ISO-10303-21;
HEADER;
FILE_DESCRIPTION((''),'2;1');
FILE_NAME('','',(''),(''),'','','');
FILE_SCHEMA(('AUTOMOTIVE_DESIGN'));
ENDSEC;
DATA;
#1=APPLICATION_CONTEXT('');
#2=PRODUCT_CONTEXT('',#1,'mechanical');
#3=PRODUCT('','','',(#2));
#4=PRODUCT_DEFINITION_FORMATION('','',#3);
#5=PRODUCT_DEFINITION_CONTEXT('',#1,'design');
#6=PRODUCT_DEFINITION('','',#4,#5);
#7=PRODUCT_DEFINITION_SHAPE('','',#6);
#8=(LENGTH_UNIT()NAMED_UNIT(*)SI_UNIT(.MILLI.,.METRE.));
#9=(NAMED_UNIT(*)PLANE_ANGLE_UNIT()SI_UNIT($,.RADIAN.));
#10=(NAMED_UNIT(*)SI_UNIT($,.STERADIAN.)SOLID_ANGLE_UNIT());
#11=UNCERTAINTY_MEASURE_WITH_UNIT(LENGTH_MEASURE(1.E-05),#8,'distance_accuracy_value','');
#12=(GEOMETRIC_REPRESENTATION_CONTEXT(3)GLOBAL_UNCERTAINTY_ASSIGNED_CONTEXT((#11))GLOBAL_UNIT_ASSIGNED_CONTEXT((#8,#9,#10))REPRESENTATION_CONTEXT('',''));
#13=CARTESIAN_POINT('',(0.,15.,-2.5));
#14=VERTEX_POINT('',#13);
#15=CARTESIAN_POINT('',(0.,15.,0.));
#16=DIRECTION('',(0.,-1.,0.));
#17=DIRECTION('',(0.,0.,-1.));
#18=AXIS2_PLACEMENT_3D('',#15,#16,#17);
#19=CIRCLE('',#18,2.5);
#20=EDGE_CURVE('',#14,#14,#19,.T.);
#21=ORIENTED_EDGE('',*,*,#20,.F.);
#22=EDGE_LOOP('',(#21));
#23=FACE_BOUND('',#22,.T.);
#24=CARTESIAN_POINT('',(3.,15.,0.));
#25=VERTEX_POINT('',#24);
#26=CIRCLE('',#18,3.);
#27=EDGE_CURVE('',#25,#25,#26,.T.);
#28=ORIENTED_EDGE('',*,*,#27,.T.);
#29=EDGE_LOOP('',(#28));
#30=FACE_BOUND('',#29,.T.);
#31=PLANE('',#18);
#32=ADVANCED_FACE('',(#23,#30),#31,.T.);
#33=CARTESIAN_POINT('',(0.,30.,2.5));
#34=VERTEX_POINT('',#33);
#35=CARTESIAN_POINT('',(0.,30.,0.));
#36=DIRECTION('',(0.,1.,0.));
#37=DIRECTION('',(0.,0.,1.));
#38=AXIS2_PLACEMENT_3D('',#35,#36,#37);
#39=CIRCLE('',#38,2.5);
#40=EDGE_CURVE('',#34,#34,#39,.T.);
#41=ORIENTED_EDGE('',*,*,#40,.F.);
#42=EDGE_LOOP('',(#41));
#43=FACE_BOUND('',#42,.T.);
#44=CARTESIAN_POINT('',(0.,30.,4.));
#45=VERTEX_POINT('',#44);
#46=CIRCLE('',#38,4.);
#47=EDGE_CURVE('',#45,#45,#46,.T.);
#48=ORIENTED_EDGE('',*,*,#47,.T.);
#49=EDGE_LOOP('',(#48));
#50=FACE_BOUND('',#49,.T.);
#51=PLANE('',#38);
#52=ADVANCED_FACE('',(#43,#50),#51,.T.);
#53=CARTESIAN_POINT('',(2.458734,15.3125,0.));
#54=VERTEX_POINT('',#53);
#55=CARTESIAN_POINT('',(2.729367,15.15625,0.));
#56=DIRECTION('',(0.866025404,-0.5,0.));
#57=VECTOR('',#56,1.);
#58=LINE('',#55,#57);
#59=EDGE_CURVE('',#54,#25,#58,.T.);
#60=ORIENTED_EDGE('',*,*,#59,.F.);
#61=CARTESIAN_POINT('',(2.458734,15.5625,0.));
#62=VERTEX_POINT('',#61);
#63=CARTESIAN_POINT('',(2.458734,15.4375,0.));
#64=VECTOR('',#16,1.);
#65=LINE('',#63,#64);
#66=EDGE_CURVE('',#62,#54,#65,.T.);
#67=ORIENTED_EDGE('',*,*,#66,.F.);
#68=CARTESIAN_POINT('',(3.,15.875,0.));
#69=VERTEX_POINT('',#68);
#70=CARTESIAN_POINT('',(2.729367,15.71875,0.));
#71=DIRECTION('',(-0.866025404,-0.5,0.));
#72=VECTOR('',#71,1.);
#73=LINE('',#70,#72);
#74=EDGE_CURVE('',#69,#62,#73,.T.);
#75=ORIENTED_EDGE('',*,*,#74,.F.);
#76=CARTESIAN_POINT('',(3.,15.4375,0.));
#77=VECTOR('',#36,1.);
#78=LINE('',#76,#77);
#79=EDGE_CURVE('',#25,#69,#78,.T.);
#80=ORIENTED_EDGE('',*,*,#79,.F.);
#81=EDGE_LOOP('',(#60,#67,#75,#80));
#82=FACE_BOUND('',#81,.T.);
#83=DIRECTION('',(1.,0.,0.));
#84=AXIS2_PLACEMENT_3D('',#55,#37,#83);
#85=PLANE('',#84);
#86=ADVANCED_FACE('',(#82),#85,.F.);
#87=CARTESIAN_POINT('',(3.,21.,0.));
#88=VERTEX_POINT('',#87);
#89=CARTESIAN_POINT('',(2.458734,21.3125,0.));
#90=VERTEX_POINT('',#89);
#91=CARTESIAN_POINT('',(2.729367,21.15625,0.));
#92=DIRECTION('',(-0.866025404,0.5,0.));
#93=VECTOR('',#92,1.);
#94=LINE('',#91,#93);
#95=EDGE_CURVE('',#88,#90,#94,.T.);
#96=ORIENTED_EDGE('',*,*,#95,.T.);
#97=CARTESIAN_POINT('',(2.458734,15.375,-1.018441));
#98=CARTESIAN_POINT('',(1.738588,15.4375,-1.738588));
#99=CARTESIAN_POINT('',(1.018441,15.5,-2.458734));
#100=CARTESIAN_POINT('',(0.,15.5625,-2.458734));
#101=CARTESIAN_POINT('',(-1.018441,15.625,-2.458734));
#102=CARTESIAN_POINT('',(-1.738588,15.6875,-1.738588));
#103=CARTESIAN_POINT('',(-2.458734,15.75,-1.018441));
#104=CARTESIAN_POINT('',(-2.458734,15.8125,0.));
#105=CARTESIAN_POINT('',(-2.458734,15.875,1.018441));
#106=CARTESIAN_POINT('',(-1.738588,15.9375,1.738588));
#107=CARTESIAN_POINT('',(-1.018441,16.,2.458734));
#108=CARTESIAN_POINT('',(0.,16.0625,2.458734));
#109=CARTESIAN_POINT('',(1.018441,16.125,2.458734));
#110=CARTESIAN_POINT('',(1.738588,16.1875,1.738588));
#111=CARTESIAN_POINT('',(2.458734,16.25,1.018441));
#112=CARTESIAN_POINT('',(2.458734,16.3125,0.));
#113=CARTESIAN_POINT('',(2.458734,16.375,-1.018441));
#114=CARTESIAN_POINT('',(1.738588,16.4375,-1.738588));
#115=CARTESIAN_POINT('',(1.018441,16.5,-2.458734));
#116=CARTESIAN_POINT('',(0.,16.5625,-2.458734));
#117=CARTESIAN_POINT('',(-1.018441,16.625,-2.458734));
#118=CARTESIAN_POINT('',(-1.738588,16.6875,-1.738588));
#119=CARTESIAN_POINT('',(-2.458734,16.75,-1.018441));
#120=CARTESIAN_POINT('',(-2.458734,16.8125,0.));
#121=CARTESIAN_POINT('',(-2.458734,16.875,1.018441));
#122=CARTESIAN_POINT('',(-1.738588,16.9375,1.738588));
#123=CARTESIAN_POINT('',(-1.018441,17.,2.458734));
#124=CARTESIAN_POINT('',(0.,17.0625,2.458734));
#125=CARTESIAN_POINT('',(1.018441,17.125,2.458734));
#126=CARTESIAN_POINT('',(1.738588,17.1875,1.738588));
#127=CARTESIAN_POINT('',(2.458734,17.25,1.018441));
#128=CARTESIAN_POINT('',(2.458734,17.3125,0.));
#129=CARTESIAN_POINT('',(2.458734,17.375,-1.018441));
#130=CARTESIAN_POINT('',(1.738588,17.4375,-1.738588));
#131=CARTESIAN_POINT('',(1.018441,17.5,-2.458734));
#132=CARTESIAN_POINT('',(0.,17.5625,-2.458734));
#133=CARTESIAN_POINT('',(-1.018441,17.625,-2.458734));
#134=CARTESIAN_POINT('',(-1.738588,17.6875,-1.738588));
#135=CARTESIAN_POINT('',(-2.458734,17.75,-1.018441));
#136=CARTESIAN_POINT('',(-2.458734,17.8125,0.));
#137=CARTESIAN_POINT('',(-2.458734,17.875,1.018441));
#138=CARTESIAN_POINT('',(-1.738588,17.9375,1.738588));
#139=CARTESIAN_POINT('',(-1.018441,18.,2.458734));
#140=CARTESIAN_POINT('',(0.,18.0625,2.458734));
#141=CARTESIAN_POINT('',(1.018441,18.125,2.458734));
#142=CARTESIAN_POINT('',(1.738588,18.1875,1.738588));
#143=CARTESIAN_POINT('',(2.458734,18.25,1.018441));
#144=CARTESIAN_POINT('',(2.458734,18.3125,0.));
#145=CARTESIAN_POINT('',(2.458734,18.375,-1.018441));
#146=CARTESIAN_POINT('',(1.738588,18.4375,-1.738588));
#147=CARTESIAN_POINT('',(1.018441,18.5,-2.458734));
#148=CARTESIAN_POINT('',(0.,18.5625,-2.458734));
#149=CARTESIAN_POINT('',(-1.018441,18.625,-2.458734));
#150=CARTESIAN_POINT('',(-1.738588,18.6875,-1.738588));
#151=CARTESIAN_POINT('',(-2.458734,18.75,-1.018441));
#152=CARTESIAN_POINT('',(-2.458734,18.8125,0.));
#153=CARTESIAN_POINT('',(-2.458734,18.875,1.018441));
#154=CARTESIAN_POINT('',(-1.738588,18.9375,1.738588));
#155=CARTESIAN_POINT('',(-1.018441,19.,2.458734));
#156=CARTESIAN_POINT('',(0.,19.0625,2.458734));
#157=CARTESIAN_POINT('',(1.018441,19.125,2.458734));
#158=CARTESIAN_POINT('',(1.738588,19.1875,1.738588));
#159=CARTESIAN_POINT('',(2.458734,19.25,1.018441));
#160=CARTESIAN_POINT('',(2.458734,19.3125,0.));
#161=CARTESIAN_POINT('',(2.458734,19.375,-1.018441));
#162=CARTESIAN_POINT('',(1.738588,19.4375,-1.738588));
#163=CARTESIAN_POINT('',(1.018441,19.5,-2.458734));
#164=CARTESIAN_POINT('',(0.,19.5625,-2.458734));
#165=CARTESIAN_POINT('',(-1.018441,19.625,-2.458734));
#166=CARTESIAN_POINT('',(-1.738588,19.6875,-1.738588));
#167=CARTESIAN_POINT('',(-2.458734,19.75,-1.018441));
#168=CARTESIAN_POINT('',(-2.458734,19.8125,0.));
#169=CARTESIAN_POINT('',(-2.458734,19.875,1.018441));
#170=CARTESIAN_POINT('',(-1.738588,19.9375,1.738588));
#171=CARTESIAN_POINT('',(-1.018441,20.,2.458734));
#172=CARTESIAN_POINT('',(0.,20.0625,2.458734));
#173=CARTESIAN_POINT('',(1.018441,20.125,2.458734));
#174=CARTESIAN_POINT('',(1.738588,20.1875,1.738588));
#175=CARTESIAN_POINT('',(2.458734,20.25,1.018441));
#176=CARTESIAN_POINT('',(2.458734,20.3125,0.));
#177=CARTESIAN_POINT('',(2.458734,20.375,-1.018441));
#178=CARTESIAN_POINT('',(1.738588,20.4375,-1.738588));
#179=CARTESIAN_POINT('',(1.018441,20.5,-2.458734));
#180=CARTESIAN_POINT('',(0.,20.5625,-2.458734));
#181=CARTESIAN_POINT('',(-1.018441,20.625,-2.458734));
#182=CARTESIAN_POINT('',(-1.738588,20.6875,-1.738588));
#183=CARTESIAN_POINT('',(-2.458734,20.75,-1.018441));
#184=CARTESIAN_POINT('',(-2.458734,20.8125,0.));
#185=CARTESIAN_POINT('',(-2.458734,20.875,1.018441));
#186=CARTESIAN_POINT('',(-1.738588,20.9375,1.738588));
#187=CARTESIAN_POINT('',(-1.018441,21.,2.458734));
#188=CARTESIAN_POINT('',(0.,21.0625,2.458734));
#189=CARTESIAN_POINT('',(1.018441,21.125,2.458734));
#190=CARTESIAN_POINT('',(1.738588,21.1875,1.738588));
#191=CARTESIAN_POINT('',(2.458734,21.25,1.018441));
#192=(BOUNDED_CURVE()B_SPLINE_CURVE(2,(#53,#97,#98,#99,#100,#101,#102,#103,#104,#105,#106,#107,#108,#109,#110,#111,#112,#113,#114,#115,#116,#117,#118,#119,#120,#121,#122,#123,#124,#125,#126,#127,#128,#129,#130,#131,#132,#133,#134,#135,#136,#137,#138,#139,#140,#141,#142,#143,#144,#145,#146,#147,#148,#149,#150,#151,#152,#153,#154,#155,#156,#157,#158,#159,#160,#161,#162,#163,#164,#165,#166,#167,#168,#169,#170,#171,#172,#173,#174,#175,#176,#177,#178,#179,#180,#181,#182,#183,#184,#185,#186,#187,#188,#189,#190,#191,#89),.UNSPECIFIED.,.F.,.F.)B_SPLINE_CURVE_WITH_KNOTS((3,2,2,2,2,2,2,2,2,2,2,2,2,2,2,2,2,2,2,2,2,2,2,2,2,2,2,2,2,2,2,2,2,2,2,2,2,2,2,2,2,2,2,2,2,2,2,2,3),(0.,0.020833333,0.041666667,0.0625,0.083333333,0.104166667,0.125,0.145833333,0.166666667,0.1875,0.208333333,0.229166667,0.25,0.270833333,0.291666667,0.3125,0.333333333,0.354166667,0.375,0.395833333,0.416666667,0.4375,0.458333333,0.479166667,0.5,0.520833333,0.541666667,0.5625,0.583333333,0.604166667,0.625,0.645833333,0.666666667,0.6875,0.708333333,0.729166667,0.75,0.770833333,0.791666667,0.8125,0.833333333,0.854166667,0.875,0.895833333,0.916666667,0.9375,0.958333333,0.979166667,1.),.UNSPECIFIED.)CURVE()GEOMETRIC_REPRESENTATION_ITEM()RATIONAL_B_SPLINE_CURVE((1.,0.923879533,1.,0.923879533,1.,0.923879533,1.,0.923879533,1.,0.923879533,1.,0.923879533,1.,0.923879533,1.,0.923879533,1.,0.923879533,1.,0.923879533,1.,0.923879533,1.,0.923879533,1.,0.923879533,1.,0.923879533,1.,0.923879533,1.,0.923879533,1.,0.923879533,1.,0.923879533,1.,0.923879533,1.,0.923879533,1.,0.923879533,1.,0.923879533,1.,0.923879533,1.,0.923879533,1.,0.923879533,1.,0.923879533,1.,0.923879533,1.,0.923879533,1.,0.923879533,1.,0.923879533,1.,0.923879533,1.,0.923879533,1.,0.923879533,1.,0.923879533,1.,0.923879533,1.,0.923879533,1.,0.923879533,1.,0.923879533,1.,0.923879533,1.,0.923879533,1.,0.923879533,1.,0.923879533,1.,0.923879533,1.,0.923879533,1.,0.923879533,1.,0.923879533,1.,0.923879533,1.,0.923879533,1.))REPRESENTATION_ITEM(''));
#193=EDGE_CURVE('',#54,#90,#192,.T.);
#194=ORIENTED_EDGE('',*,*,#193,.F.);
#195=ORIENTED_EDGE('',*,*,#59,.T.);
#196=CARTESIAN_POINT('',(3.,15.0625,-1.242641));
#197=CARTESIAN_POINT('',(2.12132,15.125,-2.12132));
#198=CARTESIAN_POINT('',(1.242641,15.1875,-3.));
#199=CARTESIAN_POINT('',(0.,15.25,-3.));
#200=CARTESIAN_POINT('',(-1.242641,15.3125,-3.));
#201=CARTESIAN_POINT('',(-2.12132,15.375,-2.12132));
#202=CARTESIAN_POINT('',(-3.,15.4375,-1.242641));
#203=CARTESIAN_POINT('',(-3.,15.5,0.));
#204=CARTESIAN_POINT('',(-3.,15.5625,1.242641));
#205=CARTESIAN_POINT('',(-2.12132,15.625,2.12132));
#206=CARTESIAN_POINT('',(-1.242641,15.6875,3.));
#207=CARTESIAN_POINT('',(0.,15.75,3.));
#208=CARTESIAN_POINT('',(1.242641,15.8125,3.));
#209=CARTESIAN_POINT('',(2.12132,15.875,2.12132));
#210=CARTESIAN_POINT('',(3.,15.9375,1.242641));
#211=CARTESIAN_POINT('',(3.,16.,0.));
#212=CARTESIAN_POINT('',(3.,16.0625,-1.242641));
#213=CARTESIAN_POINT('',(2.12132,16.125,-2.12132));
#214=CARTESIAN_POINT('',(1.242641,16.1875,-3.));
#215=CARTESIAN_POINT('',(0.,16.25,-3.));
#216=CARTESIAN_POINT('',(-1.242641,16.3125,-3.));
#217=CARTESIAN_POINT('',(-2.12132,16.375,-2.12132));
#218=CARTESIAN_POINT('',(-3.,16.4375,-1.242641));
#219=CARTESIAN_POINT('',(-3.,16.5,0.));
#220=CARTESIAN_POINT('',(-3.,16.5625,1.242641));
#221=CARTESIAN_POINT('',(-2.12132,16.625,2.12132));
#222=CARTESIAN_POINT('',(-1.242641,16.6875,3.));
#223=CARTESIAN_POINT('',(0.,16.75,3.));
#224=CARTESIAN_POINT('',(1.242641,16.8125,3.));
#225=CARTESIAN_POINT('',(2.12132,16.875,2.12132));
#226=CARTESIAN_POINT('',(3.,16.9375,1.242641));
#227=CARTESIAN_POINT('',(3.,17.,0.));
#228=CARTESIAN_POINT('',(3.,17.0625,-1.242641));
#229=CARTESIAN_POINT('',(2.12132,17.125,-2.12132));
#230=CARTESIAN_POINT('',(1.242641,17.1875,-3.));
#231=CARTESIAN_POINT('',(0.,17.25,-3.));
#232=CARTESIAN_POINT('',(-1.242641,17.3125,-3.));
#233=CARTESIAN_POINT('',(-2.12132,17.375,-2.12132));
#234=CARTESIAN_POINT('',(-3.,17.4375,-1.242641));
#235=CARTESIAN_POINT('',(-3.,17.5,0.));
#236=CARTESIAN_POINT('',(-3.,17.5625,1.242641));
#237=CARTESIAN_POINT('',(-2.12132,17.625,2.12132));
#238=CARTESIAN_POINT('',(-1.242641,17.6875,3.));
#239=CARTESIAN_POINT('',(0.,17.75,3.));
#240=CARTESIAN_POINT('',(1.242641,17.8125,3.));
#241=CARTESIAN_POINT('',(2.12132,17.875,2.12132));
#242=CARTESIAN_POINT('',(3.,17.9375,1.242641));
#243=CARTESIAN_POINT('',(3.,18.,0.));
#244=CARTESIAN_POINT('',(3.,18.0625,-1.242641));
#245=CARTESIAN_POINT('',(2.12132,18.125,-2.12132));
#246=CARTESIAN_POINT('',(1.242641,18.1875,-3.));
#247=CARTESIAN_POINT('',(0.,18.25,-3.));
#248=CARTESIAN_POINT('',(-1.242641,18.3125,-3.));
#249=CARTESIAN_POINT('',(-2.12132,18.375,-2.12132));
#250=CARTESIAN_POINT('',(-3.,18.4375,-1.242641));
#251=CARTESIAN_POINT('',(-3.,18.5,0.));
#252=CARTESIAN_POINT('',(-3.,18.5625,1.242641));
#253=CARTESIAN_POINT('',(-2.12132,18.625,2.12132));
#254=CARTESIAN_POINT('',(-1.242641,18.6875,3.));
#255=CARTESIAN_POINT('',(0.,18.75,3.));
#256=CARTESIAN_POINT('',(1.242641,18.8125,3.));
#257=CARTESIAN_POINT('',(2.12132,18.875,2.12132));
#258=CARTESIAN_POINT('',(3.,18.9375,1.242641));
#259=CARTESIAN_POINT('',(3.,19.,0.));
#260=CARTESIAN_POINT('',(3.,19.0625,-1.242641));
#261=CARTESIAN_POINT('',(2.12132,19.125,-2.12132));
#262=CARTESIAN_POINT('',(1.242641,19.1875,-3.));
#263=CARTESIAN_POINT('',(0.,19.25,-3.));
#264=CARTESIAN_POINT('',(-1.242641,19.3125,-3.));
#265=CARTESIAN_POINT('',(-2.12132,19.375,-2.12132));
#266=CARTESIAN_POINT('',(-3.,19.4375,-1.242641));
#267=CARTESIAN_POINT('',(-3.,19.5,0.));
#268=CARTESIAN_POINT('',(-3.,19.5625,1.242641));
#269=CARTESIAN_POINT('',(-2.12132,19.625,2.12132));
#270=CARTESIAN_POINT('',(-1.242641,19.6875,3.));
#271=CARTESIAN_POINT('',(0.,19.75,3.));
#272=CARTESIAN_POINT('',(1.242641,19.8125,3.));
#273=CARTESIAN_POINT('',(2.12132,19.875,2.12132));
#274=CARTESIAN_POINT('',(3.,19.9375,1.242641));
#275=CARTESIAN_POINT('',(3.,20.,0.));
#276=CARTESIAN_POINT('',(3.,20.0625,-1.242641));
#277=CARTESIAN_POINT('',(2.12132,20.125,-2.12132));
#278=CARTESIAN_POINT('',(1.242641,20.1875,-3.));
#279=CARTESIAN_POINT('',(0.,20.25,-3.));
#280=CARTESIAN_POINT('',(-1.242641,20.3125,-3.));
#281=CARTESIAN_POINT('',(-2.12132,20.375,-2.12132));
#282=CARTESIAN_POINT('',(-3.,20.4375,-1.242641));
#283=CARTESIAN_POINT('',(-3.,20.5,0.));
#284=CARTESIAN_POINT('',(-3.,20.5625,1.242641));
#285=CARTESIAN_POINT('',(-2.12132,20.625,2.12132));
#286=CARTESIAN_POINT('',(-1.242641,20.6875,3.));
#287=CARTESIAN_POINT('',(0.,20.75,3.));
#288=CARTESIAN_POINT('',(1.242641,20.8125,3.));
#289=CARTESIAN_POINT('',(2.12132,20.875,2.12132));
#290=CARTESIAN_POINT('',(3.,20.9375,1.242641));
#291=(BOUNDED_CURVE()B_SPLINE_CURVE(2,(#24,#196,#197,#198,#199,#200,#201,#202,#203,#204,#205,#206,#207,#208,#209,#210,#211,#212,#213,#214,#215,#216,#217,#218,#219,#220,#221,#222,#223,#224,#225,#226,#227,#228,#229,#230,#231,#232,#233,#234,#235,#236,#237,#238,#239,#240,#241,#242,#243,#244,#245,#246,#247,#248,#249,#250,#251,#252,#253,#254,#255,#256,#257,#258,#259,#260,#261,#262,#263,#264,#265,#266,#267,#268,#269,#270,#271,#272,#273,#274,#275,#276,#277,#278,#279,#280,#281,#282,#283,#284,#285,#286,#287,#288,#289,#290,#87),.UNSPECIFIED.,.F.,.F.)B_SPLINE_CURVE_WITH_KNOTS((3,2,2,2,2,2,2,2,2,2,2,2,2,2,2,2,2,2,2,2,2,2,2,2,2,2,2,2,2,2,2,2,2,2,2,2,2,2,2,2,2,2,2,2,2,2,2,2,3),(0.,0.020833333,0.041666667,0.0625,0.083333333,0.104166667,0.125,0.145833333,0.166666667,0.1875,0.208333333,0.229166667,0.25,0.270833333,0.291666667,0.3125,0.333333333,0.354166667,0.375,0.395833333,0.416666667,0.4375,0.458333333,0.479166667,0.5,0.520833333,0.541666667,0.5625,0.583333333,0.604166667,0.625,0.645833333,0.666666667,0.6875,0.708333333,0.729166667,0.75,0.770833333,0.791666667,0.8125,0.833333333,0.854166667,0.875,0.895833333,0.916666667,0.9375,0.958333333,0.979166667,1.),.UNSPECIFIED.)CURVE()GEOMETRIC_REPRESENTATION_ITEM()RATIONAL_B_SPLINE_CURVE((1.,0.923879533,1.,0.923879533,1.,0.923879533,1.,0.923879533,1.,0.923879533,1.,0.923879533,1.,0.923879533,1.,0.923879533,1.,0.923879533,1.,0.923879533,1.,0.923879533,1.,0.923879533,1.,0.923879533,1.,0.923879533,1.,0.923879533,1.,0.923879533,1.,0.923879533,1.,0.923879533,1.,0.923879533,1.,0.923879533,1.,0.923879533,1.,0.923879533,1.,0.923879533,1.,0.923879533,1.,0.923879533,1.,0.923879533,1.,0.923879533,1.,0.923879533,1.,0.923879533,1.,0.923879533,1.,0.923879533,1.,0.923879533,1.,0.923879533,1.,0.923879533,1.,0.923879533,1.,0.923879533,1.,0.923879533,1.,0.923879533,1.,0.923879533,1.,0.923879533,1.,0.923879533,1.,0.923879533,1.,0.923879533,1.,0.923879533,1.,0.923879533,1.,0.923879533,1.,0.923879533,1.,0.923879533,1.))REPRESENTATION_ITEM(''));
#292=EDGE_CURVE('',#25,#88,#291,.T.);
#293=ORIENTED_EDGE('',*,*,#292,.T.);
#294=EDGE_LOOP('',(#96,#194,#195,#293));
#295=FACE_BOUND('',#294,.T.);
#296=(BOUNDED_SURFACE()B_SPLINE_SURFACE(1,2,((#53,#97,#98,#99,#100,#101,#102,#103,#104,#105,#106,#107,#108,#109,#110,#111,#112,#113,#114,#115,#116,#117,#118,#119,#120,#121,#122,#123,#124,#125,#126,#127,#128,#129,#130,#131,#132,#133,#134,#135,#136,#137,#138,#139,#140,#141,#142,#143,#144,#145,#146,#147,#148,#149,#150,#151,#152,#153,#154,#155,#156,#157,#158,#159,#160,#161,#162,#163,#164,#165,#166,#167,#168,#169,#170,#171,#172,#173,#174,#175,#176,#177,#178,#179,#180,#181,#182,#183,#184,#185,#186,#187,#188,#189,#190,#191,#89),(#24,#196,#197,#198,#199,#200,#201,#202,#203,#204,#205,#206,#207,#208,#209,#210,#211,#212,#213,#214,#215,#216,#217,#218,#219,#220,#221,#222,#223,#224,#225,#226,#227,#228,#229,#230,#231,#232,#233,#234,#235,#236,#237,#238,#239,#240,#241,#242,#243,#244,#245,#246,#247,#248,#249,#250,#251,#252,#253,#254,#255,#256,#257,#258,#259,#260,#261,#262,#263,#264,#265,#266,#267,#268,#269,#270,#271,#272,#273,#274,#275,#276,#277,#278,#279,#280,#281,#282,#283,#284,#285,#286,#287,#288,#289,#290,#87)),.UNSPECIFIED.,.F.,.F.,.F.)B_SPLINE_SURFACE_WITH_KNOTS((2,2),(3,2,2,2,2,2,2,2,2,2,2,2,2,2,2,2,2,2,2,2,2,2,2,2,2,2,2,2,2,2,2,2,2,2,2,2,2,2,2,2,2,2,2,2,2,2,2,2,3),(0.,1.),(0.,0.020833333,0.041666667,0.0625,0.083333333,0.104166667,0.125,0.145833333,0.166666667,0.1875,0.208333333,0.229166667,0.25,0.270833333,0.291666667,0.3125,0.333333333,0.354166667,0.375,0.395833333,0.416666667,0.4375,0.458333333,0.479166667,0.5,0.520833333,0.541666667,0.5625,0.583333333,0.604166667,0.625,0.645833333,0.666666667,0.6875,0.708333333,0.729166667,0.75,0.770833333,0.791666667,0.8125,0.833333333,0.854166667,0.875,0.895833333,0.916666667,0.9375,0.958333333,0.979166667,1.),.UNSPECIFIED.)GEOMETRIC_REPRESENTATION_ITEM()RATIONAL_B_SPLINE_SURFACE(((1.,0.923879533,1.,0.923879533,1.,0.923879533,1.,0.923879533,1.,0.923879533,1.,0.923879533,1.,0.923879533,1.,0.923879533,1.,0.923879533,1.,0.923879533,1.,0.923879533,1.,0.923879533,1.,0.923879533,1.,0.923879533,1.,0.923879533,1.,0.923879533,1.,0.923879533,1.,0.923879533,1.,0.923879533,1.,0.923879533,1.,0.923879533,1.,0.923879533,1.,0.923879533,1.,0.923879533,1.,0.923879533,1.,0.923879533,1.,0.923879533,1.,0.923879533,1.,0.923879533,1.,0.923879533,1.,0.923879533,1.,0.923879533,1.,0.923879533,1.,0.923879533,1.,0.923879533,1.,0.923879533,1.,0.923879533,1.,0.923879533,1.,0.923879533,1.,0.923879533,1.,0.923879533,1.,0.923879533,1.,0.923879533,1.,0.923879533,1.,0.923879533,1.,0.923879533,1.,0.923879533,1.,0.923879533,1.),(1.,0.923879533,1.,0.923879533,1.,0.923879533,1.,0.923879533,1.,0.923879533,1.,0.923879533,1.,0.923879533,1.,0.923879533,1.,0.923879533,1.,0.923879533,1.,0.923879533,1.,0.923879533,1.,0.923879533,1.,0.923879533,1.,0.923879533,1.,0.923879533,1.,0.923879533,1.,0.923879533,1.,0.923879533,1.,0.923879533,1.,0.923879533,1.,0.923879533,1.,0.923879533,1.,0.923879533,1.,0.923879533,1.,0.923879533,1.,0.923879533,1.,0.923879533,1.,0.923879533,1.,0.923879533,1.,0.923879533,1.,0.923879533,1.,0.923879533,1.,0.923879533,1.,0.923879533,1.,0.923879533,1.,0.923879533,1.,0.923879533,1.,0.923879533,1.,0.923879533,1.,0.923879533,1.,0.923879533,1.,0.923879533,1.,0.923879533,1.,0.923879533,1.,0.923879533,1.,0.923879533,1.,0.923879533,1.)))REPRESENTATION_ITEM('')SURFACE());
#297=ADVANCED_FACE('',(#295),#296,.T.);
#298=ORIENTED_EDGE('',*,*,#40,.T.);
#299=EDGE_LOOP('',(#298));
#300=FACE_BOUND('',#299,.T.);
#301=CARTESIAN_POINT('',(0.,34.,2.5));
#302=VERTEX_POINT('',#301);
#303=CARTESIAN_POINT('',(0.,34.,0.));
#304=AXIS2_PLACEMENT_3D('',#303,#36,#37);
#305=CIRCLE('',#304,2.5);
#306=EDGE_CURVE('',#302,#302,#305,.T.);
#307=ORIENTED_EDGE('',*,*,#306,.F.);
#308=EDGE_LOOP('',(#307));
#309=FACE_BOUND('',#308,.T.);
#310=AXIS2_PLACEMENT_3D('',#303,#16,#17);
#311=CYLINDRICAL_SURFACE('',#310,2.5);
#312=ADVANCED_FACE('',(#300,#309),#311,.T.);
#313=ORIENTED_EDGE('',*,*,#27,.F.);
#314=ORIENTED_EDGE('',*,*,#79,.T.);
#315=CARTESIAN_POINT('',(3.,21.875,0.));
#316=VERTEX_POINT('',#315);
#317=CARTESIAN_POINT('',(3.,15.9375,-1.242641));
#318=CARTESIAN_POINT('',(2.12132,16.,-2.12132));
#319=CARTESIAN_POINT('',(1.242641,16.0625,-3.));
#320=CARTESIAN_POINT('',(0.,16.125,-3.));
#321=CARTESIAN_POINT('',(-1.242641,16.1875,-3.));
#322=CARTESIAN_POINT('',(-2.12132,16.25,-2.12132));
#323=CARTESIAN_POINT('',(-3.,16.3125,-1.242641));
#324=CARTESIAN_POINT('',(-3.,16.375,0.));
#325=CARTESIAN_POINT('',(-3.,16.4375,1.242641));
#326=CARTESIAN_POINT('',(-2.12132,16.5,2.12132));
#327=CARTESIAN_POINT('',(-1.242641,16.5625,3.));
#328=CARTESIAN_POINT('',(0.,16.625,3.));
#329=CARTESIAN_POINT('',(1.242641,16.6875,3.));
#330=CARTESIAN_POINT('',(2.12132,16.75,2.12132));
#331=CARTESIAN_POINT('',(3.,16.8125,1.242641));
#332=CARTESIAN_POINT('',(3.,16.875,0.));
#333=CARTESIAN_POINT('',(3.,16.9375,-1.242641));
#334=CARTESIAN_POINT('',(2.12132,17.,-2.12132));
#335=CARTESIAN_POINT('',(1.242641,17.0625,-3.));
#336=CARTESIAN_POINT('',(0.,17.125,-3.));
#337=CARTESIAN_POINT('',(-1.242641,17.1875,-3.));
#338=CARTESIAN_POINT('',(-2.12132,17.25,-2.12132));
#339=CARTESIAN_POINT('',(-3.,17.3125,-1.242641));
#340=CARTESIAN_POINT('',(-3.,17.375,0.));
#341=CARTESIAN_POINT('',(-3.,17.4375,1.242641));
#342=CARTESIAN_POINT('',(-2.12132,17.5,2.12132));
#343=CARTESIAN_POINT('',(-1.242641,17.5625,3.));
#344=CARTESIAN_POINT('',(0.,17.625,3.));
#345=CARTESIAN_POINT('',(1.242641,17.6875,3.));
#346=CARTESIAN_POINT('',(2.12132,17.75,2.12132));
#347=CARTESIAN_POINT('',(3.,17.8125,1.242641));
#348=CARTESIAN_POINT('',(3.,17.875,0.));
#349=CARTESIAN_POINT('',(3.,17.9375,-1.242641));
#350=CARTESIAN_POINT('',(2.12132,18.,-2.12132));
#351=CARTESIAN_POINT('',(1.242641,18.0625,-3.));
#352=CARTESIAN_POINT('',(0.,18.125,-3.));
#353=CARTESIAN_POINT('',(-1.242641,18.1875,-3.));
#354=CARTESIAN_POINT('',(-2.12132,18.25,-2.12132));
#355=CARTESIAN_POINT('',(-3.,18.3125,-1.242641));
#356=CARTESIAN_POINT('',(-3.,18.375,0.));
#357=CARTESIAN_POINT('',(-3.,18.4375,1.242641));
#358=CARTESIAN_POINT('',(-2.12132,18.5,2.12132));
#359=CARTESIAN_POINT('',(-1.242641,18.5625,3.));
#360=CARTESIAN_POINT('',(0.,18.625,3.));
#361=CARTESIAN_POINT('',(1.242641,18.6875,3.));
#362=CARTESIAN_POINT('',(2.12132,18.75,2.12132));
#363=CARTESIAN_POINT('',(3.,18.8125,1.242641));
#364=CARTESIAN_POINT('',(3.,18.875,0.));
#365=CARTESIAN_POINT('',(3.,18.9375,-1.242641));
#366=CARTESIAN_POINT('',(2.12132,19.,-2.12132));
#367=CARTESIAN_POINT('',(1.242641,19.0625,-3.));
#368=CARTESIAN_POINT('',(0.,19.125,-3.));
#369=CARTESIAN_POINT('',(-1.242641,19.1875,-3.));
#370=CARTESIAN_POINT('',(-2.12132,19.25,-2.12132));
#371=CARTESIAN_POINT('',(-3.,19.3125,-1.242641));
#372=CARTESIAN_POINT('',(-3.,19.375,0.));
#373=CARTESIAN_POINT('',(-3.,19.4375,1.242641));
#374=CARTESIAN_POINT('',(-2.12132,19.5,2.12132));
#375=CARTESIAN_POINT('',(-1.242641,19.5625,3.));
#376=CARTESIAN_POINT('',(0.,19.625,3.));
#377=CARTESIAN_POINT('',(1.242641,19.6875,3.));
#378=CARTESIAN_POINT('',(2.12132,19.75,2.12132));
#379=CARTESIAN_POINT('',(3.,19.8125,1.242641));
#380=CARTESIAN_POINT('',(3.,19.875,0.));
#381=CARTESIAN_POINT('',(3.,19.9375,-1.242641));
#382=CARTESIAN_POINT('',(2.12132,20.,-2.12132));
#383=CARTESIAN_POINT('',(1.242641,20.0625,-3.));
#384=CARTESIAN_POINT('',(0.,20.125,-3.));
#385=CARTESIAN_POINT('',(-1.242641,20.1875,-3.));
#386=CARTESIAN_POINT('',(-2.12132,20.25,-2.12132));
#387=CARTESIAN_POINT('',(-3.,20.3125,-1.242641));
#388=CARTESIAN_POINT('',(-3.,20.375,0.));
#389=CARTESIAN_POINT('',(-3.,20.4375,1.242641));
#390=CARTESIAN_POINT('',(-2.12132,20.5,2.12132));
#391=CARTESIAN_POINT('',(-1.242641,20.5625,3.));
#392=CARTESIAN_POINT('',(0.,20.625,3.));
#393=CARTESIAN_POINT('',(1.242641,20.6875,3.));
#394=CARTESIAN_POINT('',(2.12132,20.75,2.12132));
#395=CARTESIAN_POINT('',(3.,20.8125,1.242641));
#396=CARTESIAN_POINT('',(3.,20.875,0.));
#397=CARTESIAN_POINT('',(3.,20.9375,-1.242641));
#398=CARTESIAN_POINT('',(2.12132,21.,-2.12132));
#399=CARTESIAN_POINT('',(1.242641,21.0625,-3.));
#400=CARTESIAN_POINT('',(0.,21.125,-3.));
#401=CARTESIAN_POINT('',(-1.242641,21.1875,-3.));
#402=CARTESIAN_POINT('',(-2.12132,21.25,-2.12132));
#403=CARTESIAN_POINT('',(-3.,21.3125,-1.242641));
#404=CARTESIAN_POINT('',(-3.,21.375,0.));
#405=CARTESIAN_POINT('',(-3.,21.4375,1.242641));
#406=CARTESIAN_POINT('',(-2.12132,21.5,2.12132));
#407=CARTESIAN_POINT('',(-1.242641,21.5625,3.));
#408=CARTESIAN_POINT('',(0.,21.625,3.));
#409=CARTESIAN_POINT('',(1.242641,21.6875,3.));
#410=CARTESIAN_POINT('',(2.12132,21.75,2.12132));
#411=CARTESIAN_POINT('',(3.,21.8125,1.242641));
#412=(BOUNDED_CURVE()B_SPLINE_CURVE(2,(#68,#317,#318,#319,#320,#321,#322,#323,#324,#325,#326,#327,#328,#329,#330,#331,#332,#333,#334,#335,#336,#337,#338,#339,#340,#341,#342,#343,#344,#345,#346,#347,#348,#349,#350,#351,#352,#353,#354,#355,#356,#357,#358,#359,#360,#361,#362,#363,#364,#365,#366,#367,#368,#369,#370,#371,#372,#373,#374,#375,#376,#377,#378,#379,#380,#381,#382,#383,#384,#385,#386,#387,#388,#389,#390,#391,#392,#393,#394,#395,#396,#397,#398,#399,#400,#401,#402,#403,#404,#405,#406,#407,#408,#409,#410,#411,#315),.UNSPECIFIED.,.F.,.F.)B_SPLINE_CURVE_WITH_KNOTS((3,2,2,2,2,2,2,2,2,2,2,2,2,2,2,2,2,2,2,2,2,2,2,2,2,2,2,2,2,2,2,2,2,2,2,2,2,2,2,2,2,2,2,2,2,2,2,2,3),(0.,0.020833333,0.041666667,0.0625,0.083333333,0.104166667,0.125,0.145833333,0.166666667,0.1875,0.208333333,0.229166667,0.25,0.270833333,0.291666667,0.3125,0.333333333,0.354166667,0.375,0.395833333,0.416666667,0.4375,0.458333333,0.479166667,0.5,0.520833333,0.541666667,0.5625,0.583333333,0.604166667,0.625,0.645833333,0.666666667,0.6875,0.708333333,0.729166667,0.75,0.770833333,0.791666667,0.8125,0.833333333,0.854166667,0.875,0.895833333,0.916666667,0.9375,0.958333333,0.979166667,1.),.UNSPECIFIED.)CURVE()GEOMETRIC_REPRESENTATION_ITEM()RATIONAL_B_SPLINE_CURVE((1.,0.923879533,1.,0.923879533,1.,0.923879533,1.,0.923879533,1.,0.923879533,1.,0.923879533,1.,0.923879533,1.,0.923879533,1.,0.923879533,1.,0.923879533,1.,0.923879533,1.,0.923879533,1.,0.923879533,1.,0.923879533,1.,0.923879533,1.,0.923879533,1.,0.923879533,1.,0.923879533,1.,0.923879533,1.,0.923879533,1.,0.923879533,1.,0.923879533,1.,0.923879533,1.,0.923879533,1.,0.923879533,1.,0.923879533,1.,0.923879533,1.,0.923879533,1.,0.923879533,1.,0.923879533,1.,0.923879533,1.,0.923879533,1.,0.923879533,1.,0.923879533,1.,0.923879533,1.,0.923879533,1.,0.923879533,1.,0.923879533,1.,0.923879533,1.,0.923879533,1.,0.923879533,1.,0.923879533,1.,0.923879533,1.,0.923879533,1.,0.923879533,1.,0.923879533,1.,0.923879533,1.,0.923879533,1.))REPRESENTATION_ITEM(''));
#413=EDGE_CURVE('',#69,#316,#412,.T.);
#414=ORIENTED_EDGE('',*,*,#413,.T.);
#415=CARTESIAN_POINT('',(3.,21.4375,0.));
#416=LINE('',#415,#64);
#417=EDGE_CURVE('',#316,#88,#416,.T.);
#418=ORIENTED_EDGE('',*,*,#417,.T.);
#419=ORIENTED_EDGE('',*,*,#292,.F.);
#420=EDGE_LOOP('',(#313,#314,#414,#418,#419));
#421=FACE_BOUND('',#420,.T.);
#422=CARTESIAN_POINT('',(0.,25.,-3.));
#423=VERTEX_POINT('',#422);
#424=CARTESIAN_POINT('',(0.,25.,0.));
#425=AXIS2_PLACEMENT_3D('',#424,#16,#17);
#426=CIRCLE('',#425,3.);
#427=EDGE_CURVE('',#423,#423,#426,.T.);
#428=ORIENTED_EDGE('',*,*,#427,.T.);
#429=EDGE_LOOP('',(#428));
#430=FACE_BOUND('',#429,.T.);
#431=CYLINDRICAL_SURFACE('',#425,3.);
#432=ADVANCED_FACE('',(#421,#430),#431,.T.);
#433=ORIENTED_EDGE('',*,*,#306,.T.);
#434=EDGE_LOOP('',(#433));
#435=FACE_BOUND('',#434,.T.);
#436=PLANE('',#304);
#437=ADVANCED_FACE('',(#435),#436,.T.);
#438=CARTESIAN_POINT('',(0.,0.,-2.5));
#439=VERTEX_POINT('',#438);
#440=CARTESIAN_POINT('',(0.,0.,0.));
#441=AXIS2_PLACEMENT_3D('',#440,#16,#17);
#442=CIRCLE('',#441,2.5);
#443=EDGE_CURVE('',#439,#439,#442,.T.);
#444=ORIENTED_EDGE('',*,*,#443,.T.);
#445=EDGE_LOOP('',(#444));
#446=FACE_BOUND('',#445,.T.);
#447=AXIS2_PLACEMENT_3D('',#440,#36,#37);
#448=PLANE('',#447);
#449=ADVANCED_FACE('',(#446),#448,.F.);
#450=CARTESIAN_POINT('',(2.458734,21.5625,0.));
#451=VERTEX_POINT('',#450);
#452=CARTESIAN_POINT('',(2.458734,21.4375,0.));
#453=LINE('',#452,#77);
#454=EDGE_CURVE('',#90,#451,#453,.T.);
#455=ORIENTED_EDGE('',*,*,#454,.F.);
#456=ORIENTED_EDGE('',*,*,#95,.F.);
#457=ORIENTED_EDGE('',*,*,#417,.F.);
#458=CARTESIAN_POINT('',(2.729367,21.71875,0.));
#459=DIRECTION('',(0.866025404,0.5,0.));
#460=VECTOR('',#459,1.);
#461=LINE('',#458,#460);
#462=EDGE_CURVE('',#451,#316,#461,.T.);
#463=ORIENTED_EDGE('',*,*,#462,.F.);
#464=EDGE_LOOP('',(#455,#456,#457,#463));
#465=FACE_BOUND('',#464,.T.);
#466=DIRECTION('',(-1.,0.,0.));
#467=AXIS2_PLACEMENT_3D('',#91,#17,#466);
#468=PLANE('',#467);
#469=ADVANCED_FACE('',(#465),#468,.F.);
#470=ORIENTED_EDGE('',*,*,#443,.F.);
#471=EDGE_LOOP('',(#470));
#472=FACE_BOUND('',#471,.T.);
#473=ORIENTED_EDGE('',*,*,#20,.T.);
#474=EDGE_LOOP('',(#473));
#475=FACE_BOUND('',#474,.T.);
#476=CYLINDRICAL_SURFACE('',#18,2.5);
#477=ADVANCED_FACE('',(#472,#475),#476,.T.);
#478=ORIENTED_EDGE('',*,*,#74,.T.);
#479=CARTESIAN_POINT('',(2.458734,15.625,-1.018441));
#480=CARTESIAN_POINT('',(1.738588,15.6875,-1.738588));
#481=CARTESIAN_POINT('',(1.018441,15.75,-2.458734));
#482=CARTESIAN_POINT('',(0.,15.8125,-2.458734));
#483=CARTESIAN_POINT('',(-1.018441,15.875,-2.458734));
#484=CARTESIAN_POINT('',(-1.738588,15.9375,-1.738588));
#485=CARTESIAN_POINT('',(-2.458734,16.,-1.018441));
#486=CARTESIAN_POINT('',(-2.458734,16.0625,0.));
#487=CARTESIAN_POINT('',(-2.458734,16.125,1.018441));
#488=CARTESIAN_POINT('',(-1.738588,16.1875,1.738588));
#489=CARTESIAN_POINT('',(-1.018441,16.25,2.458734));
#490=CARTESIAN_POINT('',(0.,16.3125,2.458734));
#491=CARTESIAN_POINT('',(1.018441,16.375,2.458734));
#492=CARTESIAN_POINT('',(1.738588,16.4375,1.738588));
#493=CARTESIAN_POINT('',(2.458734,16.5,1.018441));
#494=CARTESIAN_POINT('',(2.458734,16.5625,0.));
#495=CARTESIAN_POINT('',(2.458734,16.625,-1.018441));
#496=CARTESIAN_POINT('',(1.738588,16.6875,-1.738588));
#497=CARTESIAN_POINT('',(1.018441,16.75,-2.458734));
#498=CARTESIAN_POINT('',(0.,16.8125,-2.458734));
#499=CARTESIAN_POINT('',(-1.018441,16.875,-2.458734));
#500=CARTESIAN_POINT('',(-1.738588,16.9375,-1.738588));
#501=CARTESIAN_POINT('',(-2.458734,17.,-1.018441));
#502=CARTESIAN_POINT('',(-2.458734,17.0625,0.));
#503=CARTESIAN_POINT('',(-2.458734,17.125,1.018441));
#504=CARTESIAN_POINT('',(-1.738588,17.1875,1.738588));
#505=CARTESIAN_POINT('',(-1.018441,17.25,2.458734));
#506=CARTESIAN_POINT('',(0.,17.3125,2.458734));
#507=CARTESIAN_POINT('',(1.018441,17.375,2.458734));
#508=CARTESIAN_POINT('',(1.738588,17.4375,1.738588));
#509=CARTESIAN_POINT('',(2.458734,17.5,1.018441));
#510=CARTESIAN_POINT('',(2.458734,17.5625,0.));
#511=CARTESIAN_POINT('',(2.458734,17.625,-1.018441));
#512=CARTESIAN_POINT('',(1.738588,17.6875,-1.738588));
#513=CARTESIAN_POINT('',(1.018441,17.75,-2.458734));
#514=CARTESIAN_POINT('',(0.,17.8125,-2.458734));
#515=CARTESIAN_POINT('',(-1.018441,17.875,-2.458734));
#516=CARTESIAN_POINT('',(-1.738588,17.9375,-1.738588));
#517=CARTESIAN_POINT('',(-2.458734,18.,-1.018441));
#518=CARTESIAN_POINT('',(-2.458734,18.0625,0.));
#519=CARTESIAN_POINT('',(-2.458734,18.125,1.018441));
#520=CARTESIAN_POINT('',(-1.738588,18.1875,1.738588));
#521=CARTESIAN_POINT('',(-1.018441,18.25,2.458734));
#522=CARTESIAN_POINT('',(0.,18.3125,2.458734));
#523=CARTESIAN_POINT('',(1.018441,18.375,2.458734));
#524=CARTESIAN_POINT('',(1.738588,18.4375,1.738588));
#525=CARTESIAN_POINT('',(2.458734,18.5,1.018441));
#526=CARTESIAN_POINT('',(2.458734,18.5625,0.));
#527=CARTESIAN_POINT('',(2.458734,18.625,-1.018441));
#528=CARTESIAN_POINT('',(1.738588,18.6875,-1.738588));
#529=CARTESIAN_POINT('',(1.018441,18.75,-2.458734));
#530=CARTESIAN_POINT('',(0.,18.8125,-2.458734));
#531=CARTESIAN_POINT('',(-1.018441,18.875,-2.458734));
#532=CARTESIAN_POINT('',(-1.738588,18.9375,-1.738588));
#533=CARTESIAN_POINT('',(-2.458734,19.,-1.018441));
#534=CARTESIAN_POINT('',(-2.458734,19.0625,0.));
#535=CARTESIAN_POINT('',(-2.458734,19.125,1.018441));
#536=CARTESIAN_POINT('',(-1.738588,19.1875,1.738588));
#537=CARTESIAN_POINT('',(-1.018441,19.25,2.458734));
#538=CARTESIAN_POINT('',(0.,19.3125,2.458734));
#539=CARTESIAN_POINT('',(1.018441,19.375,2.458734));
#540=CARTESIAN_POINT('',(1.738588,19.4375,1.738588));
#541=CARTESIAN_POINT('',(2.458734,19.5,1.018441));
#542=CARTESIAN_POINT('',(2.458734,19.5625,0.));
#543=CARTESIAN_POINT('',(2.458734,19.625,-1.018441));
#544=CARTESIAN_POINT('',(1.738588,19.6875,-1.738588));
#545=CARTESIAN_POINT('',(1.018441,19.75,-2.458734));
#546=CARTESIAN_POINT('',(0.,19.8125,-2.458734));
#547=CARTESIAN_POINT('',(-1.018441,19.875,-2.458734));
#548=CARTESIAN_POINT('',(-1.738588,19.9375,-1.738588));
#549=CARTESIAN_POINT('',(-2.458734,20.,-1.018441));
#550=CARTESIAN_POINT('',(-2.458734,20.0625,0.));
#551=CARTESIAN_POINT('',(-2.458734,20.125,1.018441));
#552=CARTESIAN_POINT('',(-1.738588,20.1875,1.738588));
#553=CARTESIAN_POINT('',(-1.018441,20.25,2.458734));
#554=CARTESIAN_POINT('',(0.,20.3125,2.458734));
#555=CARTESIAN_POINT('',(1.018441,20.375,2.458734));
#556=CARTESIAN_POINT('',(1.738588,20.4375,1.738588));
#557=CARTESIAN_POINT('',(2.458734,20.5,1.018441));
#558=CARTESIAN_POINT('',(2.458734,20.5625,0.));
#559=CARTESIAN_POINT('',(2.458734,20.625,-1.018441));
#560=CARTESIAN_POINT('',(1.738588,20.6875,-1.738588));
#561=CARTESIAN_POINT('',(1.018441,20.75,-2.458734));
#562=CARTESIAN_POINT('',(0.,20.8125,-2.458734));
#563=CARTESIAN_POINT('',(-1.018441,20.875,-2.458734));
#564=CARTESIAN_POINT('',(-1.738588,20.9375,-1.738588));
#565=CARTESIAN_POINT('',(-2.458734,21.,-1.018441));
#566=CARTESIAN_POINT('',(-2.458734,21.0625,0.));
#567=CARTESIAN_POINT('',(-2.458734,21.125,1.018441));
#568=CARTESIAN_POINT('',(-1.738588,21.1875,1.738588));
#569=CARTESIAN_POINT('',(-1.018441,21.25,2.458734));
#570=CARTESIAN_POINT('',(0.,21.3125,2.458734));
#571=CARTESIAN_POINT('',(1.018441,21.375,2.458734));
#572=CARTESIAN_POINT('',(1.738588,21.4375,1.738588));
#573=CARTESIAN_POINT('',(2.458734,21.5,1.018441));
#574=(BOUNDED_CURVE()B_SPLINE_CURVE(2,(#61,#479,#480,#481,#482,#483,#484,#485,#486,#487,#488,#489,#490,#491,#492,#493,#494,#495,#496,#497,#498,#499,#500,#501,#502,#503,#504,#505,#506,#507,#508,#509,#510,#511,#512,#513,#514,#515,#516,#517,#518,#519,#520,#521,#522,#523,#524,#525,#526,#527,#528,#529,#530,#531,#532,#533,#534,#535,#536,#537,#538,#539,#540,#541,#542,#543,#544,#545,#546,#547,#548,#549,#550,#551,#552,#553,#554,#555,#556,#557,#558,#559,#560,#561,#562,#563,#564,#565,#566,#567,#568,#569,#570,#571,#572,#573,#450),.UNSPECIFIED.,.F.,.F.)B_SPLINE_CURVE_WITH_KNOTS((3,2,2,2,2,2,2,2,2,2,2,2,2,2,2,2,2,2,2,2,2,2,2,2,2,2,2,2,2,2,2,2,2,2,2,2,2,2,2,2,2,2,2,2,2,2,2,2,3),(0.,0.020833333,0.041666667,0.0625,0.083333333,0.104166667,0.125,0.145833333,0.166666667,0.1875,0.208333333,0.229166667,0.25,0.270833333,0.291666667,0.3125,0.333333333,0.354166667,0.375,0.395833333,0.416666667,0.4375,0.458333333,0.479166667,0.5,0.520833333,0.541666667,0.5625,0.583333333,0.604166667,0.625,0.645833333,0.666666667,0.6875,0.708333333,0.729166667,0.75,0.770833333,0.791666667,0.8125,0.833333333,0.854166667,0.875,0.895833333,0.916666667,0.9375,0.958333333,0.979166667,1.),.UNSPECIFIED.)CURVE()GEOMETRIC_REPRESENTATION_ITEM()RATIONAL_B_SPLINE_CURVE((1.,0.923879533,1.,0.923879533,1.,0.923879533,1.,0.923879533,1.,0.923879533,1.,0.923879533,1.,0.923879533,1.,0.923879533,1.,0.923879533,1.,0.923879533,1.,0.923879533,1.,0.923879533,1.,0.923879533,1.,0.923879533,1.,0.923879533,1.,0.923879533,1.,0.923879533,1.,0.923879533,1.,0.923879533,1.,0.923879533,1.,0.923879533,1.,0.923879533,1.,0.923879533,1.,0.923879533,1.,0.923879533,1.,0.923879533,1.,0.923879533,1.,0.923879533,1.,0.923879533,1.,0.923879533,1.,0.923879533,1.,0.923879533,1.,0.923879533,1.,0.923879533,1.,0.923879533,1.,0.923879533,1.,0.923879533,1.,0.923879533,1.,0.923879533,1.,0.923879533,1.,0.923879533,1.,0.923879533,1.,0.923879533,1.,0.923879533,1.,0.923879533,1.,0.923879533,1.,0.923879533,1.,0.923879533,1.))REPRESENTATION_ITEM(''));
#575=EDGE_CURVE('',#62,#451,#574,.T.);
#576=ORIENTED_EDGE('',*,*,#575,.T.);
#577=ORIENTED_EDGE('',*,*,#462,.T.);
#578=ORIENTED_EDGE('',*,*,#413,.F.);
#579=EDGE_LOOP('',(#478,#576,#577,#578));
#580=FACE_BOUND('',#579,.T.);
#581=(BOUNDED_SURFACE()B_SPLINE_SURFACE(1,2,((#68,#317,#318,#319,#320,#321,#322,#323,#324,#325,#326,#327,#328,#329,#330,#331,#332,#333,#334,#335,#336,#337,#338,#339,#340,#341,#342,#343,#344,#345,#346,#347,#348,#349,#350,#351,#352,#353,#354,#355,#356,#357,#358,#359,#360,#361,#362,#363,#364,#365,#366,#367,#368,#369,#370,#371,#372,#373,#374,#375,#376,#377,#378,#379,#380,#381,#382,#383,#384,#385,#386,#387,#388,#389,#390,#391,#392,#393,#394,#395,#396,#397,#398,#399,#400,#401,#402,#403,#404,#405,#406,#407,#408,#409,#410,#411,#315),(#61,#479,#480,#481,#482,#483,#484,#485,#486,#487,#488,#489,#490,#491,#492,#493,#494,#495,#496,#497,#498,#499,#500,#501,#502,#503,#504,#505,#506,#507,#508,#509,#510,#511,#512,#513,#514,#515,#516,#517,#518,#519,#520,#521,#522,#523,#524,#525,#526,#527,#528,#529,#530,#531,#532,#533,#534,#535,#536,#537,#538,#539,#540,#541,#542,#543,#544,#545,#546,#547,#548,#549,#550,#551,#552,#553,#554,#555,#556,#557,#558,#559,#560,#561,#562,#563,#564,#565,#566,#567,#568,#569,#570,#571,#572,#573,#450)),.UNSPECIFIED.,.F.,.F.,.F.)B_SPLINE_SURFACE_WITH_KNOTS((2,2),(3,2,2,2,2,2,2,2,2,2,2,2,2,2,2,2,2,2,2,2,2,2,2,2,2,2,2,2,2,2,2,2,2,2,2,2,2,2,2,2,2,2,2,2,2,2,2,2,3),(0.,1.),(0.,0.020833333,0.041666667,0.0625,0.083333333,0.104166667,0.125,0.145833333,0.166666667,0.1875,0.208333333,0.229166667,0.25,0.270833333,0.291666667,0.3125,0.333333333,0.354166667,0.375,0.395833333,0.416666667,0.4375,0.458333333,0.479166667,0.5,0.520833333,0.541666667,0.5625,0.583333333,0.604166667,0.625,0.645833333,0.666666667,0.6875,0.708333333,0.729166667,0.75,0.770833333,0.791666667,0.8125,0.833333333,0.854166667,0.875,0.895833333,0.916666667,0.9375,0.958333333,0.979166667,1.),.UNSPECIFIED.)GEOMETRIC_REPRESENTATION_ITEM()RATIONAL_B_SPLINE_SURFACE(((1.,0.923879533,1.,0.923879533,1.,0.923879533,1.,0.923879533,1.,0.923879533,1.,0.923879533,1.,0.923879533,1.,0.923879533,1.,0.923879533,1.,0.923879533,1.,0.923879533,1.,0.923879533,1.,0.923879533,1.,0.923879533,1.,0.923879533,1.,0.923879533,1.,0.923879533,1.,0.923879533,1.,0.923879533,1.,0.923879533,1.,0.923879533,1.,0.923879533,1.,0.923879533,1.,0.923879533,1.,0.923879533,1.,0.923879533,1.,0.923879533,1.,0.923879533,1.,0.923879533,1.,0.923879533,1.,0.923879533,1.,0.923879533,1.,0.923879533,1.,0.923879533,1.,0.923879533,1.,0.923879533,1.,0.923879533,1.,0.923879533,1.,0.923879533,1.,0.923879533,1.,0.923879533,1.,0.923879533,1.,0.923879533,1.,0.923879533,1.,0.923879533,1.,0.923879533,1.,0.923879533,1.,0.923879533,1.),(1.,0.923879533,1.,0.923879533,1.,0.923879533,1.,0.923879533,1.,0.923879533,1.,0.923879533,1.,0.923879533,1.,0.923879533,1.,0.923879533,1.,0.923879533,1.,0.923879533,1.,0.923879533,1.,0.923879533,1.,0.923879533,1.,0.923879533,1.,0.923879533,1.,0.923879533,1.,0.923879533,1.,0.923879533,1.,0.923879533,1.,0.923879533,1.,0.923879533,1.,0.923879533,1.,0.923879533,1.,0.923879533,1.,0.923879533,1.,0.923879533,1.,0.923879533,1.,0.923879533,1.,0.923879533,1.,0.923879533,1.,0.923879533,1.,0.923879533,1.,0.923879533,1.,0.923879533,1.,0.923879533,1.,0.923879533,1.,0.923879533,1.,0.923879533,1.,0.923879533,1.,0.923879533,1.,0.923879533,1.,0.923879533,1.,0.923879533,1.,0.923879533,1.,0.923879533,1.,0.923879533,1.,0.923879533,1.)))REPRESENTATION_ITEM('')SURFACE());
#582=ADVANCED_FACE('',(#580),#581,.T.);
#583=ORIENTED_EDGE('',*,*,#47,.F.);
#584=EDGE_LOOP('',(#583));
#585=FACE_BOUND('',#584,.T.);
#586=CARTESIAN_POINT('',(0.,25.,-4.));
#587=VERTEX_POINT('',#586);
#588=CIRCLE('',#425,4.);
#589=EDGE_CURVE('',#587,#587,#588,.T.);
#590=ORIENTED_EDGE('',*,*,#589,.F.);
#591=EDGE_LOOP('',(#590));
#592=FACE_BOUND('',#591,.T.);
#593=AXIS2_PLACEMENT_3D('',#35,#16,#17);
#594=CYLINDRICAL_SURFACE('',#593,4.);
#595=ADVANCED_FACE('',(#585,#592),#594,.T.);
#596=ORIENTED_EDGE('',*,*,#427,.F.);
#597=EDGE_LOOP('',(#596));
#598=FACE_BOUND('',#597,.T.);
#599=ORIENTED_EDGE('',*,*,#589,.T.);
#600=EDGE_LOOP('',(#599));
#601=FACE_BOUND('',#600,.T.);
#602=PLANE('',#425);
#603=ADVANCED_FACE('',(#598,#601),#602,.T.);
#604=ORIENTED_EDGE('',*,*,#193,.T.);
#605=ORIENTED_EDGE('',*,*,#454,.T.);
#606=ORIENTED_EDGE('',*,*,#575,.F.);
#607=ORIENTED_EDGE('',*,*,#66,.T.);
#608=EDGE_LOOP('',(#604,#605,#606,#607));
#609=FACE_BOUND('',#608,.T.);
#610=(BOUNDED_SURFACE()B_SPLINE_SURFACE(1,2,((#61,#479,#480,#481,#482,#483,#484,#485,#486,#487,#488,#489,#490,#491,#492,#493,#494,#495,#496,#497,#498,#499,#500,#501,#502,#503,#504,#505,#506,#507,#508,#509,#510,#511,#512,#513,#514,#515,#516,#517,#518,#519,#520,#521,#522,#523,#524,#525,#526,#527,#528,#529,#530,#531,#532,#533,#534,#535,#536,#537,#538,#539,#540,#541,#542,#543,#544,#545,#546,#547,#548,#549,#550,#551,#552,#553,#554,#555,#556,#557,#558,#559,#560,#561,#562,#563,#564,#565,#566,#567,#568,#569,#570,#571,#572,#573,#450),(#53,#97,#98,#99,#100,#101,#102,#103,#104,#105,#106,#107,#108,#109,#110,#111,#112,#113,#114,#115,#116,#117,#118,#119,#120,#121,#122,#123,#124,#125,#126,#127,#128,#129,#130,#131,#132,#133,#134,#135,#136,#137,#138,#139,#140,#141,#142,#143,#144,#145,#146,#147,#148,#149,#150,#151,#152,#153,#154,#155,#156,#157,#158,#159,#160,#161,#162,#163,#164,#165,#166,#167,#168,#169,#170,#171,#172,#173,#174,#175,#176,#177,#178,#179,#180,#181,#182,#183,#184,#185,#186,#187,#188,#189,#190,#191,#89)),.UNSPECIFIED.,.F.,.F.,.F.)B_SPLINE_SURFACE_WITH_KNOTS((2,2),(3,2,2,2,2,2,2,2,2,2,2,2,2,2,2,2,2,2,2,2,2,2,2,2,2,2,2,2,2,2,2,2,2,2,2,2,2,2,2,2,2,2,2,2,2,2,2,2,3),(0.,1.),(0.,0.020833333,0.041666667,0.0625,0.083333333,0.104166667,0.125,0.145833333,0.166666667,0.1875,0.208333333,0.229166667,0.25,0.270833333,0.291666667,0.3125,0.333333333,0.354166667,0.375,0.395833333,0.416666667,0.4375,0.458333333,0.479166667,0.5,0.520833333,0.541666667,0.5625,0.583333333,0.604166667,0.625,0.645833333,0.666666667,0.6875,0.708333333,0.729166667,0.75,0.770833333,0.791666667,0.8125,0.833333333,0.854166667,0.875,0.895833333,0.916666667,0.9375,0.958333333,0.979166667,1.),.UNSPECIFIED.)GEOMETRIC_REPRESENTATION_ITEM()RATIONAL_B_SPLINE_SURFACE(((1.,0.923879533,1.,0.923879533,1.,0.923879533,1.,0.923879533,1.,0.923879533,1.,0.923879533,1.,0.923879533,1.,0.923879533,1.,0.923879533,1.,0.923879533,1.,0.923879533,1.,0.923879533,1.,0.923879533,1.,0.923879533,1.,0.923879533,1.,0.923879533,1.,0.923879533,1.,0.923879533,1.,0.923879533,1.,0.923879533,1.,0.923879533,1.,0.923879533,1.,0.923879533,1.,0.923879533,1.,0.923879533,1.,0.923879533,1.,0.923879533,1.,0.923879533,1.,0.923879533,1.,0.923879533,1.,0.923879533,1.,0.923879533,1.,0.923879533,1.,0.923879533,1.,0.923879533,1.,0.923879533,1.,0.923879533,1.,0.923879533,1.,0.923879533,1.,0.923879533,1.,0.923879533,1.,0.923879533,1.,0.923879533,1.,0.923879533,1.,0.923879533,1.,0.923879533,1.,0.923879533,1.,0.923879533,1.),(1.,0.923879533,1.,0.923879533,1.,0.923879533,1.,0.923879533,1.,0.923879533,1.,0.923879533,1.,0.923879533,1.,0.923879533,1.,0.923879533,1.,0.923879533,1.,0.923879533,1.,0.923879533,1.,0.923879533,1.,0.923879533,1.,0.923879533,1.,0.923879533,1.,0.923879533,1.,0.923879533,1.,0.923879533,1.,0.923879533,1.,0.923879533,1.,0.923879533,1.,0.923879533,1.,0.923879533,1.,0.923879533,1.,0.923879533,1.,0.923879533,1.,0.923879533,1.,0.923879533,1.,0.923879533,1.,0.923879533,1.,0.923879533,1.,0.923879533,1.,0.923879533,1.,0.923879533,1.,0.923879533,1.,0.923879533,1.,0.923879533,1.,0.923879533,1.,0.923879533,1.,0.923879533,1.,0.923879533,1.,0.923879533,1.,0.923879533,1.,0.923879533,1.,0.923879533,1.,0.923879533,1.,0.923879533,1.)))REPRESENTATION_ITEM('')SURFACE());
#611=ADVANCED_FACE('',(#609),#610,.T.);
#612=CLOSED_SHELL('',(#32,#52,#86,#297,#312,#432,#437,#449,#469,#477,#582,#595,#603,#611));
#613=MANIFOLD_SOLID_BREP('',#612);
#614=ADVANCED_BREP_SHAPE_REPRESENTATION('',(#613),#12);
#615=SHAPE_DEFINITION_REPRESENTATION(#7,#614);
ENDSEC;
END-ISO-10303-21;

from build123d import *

# Parameters (mm, degrees)
SKETCH1_R           = 4
BOSS_EXTRUDE1_DEPTH = 30
SKETCH8_R           = 4
SKETCH8_R_2         = 3
CUT_EXTRUDE2_DEPTH  = 25
SKETCH15_R          = 3
SKETCH15_R_2        = 2.5
CUT_EXTRUDE3_DEPTH  = 15
THREAD1_PITCH       = 1
SKETCH18_R          = 2.5
BOSS_EXTRUDE2_DEPTH = 4


with BuildPart() as part:
    # Sketch1 → Boss-Extrude1 (new body)
    with BuildSketch(Plane(origin=(0, 0, 0), x_dir=(1, 0, 0), z_dir=(0, 1, 0))):
        with Locations(Location((0, 0, 0), (0, 0, 270))):
            Circle(SKETCH1_R)
    extrude(amount=BOSS_EXTRUDE1_DEPTH)

    # Sketch8 → Cut-Extrude2 (cut)
    with BuildSketch(Plane.XZ):
        with Locations(Location((0, 0, 0), (0, 0, 270))):
            Circle(SKETCH8_R)
        with Locations(Location((0, 0, 0), (0, 0, 270))):
            Circle(SKETCH8_R_2, mode=Mode.SUBTRACT)
    extrude(amount=-CUT_EXTRUDE2_DEPTH, mode=Mode.SUBTRACT)

    # Sketch15 → Cut-Extrude3 (cut)
    with BuildSketch(Plane.XZ):
        with Locations(Location((0, 0, 0), (0, 0, 270))):
            Circle(SKETCH15_R)
        with Locations(Location((0, 0, 0), (0, 0, 270))):
            Circle(SKETCH15_R_2, mode=Mode.SUBTRACT)
    extrude(amount=-CUT_EXTRUDE3_DEPTH, mode=Mode.SUBTRACT)

    # Thread1: the profile of Thread Profile1 profile screwed along a right-hand helix of 6 turns, 8 arcs to a turn; built about Z, then put on its axis
    thread1_z = Axis((0, 0, 0), (0, 0, 1))
    thread1_corners = [(3.0003, 0, -0.000173205), (3.0003, 0, 0.875173202), (2.458734125, 0, 0.562499999), (2.458734125, 0, 0.312499999)]
    with BuildLine(mode=Mode.PRIVATE) as thread1_profile:
        Line(thread1_corners[0], thread1_corners[1])
        Line(thread1_corners[1], thread1_corners[2])
        Line(thread1_corners[2], thread1_corners[3])
        Line(thread1_corners[3], thread1_corners[0])
    thread1_cap = Face(thread1_profile.wire())
    thread1_turn_angles = [0, 22.5, 45, 67.5, 90, 112.5, 135, 157.5, 180, 202.5, 225, 247.5, 270, 292.5, 315, 337.5, 360]
    thread1_turn_weights = [1, 0.9238795325112867, 1, 0.9238795325112867, 1, 0.9238795325112867, 1, 0.9238795325112867, 1, 0.9238795325112867, 1, 0.9238795325112867, 1, 0.9238795325112867, 1, 0.9238795325112867, 1]
    thread1_turn_rails = [Edge.make_bspline([Vector(p[0], p[1], 0).rotate(thread1_z, thread1_turn_angles[k]) / thread1_turn_weights[k] + Vector(0, 0, p[2] + THREAD1_PITCH * thread1_turn_angles[k] / 360) for k in range(17)], [0, 0, 0, 1, 1, 2, 2, 3, 3, 4, 4, 5, 5, 6, 6, 7, 7, 8, 8, 8], 2, thread1_turn_weights) for p in thread1_corners]
    thread1_turn_sides = [Face.make_surface_from_curves(thread1_turn_rails[p[0]], thread1_turn_rails[p[1]]) for p in [(0, 1), (1, 2), (2, 3), (3, 0)]]
    thread1_turn = Solid(Shell([*thread1_turn_sides, thread1_cap, thread1_cap.rotate(thread1_z, 360).moved(Location((0, 0, THREAD1_PITCH * 360 / 360)))]))
    thread1_each = [*[thread1_turn.moved(Location((0, 0, THREAD1_PITCH * i))) for i in range(6)]]
    add(Plane(origin=(0, 15, 0), x_dir=(1, 0, 0), z_dir=(0, 1, 0)) * Compound([thread1_each[i] for i in range(0, 6, 2)]), mode=Mode.SUBTRACT)
    add(Plane(origin=(0, 15, 0), x_dir=(1, 0, 0), z_dir=(0, 1, 0)) * Compound([thread1_each[i] for i in range(1, 6, 2)]), mode=Mode.SUBTRACT)

    # Sketch18 → Boss-Extrude2 (add)
    with BuildSketch(Plane(origin=(0, 30, 0), x_dir=(1, 0, 0), z_dir=(0, 1, 0))):
        with Locations(Location((0, 0, 0), (0, 0, 90))):
            Circle(SKETCH18_R)
    extrude(amount=BOSS_EXTRUDE2_DEPTH)


solid = part.part
